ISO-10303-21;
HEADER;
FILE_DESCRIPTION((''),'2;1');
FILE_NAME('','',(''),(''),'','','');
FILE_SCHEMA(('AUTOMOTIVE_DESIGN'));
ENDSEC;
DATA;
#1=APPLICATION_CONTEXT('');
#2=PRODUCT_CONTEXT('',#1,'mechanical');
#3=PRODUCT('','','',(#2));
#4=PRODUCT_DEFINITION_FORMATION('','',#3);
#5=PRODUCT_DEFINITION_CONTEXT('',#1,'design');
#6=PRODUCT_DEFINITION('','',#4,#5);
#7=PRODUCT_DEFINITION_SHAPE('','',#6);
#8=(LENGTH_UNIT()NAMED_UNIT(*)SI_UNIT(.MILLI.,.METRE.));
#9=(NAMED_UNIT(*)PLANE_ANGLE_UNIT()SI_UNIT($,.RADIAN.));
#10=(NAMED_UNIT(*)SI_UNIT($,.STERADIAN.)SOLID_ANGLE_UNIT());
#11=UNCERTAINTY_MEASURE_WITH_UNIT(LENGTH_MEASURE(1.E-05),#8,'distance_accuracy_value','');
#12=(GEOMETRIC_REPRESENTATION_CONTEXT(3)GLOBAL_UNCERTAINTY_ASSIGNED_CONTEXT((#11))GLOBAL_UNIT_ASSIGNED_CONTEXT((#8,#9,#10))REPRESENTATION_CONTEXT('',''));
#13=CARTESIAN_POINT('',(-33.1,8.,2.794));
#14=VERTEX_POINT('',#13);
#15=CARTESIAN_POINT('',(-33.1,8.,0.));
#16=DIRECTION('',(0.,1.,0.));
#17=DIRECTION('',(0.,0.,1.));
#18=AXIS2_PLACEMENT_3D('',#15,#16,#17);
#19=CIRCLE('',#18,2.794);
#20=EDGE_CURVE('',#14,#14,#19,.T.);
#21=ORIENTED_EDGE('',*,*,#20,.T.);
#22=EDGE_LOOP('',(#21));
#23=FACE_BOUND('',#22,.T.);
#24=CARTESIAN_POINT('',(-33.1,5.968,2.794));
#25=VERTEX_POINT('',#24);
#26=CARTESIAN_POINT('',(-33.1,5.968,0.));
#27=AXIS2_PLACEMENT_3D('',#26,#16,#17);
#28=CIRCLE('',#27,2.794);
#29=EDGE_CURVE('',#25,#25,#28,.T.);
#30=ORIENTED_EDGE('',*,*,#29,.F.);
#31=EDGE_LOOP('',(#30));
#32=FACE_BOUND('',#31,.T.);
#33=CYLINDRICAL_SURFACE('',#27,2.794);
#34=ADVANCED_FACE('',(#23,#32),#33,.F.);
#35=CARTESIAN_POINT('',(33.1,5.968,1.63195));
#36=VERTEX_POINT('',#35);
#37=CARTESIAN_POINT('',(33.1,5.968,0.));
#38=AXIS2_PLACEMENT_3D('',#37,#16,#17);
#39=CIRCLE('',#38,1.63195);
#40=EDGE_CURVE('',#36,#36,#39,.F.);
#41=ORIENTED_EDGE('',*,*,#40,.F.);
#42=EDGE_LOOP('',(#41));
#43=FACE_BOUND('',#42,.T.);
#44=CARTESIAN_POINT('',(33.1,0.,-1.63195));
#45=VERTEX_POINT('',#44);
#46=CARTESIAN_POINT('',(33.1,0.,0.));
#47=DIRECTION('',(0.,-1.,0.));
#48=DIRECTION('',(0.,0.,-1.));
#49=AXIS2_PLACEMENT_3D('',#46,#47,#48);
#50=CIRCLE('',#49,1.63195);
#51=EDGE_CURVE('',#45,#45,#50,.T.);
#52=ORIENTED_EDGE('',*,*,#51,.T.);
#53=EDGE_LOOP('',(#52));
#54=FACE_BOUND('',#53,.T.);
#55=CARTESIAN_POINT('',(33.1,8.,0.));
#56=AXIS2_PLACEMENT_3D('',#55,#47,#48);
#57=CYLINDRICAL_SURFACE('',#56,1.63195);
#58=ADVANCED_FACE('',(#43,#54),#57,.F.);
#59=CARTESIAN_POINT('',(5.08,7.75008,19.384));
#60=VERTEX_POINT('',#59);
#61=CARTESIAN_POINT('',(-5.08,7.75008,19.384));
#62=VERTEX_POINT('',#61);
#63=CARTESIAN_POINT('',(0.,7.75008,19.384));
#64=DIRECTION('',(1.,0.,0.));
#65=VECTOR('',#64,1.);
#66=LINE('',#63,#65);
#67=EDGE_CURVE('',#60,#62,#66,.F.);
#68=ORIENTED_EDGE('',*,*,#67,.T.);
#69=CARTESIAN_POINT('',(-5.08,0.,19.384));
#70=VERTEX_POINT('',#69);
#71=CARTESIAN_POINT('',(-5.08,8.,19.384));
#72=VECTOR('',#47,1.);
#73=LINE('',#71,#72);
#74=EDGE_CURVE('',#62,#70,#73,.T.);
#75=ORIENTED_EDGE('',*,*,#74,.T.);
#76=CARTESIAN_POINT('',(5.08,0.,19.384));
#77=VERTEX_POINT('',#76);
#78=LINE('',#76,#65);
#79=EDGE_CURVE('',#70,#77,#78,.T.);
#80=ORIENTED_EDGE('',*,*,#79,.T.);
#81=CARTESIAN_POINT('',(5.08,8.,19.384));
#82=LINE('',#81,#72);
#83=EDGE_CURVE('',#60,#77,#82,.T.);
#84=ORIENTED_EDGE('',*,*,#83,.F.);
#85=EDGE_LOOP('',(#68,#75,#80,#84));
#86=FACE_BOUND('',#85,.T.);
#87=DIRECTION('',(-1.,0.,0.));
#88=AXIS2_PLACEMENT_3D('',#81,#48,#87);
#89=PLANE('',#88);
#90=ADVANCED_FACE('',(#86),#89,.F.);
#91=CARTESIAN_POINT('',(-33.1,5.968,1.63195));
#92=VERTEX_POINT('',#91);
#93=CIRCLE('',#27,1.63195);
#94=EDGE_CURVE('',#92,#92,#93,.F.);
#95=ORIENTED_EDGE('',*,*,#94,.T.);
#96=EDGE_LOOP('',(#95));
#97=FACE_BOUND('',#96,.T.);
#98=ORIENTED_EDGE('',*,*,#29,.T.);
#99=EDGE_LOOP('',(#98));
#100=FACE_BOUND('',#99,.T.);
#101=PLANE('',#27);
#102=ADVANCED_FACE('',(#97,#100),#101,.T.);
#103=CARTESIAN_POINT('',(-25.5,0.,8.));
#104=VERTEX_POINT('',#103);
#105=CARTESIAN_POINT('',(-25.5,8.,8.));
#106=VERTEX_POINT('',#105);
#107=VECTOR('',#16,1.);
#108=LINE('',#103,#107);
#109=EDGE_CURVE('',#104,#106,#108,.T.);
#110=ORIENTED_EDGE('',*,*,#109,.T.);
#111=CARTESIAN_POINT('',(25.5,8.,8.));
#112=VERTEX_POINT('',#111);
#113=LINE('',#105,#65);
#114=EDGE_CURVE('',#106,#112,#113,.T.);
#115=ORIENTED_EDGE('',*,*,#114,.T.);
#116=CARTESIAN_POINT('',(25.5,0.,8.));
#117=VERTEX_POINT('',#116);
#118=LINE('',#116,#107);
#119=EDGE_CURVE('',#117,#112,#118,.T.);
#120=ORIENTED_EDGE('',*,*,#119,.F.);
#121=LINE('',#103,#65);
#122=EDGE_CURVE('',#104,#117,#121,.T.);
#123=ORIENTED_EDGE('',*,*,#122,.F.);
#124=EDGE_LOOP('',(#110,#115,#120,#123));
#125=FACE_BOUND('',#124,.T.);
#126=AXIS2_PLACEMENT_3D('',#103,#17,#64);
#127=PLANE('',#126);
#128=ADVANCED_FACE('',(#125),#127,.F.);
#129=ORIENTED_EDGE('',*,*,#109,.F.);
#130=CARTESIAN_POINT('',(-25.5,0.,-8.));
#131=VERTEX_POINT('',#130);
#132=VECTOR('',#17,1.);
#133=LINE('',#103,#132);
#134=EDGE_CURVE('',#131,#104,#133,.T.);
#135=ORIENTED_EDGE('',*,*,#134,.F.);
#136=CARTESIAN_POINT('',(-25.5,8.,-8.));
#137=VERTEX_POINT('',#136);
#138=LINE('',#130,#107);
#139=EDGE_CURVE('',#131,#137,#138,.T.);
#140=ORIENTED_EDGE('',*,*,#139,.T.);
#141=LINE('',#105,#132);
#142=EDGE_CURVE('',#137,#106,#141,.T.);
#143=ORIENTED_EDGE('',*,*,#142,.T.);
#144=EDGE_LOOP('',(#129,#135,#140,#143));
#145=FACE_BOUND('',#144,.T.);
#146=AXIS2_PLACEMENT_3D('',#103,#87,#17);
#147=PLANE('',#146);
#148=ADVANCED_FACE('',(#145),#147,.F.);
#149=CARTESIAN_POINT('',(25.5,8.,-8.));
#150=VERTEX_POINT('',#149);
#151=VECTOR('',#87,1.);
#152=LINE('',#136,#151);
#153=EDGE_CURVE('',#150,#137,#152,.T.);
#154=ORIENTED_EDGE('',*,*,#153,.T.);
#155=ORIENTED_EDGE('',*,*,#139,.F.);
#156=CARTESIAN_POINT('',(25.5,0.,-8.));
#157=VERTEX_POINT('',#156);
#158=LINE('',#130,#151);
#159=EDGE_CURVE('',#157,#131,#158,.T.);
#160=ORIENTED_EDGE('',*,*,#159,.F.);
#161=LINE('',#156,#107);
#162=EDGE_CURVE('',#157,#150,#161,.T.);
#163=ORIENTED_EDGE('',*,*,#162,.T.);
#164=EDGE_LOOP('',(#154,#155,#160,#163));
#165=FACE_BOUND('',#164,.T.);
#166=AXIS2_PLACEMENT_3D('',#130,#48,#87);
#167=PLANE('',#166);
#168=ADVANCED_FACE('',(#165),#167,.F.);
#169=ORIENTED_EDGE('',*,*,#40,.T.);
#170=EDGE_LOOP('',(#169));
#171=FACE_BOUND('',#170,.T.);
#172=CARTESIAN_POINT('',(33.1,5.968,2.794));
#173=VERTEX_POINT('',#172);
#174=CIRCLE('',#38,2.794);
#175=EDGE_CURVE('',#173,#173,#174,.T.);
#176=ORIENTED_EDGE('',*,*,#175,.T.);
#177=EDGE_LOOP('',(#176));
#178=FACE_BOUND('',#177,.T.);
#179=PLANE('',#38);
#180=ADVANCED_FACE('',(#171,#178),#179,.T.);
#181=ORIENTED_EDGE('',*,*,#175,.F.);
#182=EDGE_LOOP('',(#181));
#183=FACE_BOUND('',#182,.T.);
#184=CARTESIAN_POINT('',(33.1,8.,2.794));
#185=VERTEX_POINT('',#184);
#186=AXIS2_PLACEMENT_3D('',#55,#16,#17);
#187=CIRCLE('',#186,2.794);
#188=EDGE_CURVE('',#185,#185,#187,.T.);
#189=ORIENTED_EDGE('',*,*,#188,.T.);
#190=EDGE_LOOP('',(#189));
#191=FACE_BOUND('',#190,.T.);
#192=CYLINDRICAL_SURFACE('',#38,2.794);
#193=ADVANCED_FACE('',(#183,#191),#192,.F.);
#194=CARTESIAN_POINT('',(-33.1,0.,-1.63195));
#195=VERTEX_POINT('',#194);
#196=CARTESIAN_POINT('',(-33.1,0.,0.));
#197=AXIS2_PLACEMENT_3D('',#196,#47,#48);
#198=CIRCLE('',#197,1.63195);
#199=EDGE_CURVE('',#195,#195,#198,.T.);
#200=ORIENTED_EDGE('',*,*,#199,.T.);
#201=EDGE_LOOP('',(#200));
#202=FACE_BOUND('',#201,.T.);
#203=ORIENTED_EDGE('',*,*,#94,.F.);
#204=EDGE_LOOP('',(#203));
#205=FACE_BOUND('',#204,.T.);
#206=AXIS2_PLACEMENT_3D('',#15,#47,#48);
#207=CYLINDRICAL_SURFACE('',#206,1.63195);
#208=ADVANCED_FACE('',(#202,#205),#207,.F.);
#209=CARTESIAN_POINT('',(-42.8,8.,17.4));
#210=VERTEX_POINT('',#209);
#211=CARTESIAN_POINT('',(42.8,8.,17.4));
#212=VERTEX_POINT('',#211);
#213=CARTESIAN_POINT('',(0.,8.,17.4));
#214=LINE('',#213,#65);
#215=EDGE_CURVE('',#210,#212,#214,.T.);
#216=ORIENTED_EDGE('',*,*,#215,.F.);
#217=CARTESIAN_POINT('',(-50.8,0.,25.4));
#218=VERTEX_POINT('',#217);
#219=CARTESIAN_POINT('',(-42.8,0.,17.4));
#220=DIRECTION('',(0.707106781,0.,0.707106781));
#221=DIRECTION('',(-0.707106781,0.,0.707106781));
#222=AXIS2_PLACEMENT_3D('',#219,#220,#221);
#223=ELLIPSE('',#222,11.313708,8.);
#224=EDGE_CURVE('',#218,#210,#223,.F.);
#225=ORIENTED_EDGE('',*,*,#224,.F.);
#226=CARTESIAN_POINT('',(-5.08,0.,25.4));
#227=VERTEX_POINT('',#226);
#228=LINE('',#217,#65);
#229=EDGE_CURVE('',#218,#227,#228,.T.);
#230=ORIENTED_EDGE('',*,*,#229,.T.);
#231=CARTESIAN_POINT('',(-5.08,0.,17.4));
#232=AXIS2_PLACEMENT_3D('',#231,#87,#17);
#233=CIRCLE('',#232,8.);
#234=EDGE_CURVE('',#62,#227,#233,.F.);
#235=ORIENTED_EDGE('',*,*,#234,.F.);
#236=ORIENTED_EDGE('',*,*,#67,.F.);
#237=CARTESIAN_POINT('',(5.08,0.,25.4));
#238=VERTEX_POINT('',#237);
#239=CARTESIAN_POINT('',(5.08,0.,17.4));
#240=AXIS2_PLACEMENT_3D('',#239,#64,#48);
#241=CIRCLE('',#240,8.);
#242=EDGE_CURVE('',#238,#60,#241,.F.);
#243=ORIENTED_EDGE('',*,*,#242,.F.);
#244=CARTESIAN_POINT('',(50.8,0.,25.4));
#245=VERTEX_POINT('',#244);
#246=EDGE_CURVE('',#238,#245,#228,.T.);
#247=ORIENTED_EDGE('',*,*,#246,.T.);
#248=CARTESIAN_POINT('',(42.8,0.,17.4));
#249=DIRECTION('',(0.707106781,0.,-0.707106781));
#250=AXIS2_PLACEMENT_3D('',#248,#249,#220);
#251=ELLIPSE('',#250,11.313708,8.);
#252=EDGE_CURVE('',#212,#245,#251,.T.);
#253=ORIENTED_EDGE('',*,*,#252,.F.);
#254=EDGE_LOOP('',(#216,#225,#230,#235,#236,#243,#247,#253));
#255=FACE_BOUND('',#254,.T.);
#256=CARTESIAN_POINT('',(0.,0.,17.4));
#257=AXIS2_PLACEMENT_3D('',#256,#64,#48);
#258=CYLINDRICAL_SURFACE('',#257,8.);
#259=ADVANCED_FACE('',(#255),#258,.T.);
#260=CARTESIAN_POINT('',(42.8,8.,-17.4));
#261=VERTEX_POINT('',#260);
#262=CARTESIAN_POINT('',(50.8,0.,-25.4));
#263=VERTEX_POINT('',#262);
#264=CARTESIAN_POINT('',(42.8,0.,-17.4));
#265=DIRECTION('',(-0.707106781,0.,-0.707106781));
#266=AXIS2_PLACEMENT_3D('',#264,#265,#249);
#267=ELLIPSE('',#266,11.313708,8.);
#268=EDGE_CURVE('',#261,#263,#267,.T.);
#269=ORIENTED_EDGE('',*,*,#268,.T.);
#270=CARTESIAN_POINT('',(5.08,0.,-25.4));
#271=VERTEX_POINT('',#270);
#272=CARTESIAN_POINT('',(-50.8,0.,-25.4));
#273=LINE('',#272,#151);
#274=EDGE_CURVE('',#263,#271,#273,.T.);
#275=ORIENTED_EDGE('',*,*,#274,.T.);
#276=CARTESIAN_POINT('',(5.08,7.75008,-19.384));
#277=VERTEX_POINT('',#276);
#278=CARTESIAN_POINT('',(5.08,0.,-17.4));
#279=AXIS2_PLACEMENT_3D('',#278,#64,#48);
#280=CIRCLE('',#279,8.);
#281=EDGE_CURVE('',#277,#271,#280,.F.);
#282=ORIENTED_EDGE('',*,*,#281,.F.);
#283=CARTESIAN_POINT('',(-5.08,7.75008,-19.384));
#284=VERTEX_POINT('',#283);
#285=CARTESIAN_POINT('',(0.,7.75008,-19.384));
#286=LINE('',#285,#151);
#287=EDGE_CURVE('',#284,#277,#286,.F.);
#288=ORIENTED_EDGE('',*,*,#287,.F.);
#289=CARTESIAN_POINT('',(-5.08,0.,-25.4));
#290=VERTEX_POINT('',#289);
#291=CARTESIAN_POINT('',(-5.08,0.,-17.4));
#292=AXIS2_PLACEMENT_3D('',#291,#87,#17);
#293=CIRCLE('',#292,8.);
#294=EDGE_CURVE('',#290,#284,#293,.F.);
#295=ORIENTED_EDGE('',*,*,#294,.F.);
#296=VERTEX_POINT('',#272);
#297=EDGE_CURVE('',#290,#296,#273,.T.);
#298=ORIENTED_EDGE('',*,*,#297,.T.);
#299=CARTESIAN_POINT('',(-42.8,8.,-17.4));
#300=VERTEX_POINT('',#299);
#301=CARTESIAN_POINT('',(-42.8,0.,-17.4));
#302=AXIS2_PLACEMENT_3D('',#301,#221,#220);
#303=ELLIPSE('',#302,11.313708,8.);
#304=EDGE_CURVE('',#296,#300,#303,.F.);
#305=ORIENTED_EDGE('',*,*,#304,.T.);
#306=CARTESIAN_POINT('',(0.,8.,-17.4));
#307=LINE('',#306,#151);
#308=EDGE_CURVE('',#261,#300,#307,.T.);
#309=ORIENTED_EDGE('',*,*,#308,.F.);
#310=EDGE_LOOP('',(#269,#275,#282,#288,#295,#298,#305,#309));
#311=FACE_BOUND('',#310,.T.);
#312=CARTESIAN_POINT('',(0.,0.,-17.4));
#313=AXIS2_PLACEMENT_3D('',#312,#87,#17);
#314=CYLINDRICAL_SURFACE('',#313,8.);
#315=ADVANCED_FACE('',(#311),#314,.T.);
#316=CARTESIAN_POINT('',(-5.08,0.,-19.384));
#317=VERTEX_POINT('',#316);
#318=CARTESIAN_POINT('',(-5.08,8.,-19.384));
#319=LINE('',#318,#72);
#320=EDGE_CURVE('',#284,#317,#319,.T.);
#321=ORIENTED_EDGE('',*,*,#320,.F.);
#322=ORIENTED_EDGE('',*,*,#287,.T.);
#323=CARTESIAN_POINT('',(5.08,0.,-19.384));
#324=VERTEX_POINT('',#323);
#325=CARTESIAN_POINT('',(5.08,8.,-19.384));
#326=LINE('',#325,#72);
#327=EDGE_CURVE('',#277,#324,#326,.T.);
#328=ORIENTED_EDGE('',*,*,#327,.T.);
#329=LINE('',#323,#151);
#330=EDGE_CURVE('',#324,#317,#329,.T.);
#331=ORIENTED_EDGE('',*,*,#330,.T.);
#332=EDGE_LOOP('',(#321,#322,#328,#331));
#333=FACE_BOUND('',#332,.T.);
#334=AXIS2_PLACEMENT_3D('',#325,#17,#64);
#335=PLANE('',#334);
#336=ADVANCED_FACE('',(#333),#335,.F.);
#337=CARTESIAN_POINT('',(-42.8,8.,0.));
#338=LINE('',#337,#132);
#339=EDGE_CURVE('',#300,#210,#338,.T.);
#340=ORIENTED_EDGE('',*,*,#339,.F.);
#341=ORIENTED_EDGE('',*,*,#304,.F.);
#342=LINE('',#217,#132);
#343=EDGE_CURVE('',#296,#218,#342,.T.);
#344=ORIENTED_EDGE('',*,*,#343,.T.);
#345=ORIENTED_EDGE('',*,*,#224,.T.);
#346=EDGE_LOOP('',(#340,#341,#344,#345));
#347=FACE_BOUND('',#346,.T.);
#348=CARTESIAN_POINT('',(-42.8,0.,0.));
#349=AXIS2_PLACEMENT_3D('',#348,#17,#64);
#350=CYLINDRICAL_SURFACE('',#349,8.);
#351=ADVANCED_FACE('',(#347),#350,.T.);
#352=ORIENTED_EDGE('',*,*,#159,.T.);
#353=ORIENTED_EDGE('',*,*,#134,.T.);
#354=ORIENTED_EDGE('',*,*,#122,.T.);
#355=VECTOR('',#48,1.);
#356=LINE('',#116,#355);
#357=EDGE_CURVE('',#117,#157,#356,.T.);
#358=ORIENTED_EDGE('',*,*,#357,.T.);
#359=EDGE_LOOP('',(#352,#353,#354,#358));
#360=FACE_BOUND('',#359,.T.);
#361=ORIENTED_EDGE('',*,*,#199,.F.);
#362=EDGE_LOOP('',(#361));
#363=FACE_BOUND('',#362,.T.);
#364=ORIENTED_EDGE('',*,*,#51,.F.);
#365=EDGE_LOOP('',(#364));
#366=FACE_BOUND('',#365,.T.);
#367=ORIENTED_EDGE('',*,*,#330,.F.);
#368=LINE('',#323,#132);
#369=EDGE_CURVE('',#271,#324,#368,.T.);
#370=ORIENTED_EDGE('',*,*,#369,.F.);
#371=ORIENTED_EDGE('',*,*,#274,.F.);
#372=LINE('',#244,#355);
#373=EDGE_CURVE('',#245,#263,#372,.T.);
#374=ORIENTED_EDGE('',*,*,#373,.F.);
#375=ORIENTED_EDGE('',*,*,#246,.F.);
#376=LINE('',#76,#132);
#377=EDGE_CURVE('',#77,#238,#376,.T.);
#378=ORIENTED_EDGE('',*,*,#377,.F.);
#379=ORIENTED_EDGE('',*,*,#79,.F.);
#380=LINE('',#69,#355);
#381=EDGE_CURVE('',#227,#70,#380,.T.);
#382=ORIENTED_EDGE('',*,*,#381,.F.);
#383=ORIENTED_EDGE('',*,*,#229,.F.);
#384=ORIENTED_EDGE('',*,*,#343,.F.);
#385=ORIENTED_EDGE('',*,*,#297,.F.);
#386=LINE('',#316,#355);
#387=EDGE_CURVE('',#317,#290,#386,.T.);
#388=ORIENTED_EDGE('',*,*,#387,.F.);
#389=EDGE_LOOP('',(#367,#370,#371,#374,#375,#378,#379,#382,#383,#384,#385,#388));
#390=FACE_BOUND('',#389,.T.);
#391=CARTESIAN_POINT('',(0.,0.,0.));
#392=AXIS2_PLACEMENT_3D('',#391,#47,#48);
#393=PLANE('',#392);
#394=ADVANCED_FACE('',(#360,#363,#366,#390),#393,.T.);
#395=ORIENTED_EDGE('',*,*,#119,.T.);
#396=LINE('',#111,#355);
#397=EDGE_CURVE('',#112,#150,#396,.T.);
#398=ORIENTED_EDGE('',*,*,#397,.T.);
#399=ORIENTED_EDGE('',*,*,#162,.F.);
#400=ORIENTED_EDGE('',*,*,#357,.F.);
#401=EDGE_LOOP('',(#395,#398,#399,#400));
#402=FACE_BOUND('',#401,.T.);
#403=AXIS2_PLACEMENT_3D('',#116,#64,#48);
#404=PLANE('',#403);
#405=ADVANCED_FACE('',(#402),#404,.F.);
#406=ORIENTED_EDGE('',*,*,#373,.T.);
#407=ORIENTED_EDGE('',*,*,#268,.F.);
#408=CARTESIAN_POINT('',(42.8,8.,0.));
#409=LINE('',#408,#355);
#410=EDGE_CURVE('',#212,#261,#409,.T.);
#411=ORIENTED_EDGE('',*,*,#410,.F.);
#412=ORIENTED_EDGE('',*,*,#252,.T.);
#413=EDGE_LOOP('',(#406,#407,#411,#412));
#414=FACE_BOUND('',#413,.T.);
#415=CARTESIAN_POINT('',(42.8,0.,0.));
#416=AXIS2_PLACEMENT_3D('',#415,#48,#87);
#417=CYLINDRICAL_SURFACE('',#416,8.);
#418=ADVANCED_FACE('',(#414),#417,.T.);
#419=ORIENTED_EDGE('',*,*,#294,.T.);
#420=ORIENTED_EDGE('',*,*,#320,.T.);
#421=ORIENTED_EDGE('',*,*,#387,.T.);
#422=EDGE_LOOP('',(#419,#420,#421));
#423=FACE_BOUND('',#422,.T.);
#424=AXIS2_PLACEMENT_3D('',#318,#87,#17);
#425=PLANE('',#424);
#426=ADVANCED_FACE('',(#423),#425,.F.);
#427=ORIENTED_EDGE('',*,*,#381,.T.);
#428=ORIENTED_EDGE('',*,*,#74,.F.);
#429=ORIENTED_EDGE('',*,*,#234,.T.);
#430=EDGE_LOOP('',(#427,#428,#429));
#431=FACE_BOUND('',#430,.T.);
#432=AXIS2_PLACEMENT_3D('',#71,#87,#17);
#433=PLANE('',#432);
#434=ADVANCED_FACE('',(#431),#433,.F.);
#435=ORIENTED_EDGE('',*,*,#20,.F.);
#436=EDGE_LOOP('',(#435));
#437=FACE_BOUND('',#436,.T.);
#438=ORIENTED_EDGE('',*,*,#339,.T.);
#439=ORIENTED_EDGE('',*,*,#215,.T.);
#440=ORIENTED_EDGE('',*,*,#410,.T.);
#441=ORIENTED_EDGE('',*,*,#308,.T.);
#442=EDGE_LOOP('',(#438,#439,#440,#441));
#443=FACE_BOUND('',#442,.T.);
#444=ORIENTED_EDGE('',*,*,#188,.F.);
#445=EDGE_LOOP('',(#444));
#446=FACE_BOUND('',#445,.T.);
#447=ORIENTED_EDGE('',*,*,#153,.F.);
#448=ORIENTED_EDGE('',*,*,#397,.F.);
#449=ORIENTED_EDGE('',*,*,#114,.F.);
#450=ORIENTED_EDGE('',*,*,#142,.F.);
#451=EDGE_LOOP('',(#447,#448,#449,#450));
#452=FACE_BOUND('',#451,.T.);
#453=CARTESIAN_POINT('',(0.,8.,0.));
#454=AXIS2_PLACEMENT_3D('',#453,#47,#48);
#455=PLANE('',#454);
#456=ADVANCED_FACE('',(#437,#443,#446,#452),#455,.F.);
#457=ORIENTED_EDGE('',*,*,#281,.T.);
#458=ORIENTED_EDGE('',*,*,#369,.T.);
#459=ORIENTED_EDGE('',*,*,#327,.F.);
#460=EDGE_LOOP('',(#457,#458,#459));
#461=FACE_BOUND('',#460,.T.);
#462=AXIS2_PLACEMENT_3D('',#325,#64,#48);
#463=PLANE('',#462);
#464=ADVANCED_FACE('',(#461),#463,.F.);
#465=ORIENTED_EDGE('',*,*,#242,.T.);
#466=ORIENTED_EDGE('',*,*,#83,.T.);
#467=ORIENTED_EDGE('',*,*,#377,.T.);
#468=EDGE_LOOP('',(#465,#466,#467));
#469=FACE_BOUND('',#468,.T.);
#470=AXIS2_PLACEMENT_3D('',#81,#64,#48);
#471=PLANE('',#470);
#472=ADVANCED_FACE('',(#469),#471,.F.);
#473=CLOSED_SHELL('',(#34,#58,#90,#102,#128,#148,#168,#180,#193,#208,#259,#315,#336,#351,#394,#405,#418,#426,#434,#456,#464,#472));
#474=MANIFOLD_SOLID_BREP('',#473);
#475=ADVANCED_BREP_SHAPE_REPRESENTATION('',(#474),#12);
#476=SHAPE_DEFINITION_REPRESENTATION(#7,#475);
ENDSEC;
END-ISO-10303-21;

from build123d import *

# Parameters (mm, degrees)
SKETCH2_W           = 101.6
SKETCH2_H           = 50.8
BOSS_EXTRUDE1_DEPTH = 8
SKETCH3_W           = 51
SKETCH3_H           = 16
CUT_EXTRUDE1_DEPTH  = 58.356778152
FILLET1_R           = 8
SKETCH5_R           = 1.63195
CUT_EXTRUDE2_DEPTH  = 58.356778152
SKETCH6_R           = 1.63195
CUT_EXTRUDE3_DEPTH  = 58.356778152
SKETCH7_W           = 10.16
SKETCH7_H           = 6.016
CUT_EXTRUDE4_DEPTH  = 58.356778152
SKETCH8_W           = 10.16
SKETCH8_H           = 6.016
CUT_EXTRUDE5_DEPTH  = 58.356778152
SKETCH9_R           = 2.794
CUT_EXTRUDE6_DEPTH  = 2.032
SKETCH10_R          = 2.794
CUT_EXTRUDE7_DEPTH  = 2.032


with BuildPart() as part:
    # Sketch2 → Boss-Extrude1 (new body)
    with BuildSketch(Plane(origin=(0, 0, 0), x_dir=(1, 0, 0), z_dir=(0, 1, 0))):
        Rectangle(SKETCH2_W, SKETCH2_H)
    extrude(amount=BOSS_EXTRUDE1_DEPTH)

    # Sketch3 → Cut-Extrude1 (cut, through all)
    with BuildSketch(Plane(origin=(0, 8, 0), x_dir=(1, 0, 0), z_dir=(0, 1, 0))):
        Rectangle(SKETCH3_W, SKETCH3_H)
    extrude(amount=-CUT_EXTRUDE1_DEPTH, mode=Mode.SUBTRACT)

    # Fillet1
    fillet1_edges = [part.edges().sort_by_distance(p)[0] for p in [
        (0, 8, -25.4),
        (50.8, 8, 0),
        (0, 8, 25.4),
        (-50.8, 8, 0),
    ]]
    fillet(fillet1_edges, radius=FILLET1_R - 0.0001)  # a hair under: the kernel refuses the full size

    # Sketch5 → Cut-Extrude2 (cut, through all)
    with BuildSketch(Plane.XZ):
        with Locations(Location((-33.1, 0, 0), (0, 0, 270))):
            Circle(SKETCH5_R)
    extrude(amount=-CUT_EXTRUDE2_DEPTH, mode=Mode.SUBTRACT)

    # Sketch6 → Cut-Extrude3 (cut, through all)
    with BuildSketch(Plane.XZ):
        with Locations(Location((33.1, 0, 0), (0, 0, 270))):
            Circle(SKETCH6_R)
    extrude(amount=-CUT_EXTRUDE3_DEPTH, mode=Mode.SUBTRACT)

    # Sketch7 → Cut-Extrude4 (cut, through all)
    with BuildSketch(Plane.XZ):
        with Locations((0, 22.392)):
            Rectangle(SKETCH7_W, SKETCH7_H)
    extrude(amount=-CUT_EXTRUDE4_DEPTH, mode=Mode.SUBTRACT)

    # Sketch8 → Cut-Extrude5 (cut, through all)
    with BuildSketch(Plane.XZ):
        with Locations((0, -22.392)):
            Rectangle(SKETCH8_W, SKETCH8_H)
    extrude(amount=-CUT_EXTRUDE5_DEPTH, mode=Mode.SUBTRACT)

    # Sketch9 → Cut-Extrude6 (cut)
    with BuildSketch(Plane(origin=(0, 8, 0), x_dir=(1, 0, 0), z_dir=(0, 1, 0))):
        with Locations(Location((-33.1, 0, 0), (0, 0, 270))):
            Circle(SKETCH9_R)
    extrude(amount=-CUT_EXTRUDE6_DEPTH, mode=Mode.SUBTRACT)

    # Sketch10 → Cut-Extrude7 (cut)
    with BuildSketch(Plane(origin=(0, 8, 0), x_dir=(1, 0, 0), z_dir=(0, 1, 0))):
        with Locations(Location((33.1, 0, 0), (0, 0, 270))):
            Circle(SKETCH10_R)
    extrude(amount=-CUT_EXTRUDE7_DEPTH, mode=Mode.SUBTRACT)


solid = part.part
